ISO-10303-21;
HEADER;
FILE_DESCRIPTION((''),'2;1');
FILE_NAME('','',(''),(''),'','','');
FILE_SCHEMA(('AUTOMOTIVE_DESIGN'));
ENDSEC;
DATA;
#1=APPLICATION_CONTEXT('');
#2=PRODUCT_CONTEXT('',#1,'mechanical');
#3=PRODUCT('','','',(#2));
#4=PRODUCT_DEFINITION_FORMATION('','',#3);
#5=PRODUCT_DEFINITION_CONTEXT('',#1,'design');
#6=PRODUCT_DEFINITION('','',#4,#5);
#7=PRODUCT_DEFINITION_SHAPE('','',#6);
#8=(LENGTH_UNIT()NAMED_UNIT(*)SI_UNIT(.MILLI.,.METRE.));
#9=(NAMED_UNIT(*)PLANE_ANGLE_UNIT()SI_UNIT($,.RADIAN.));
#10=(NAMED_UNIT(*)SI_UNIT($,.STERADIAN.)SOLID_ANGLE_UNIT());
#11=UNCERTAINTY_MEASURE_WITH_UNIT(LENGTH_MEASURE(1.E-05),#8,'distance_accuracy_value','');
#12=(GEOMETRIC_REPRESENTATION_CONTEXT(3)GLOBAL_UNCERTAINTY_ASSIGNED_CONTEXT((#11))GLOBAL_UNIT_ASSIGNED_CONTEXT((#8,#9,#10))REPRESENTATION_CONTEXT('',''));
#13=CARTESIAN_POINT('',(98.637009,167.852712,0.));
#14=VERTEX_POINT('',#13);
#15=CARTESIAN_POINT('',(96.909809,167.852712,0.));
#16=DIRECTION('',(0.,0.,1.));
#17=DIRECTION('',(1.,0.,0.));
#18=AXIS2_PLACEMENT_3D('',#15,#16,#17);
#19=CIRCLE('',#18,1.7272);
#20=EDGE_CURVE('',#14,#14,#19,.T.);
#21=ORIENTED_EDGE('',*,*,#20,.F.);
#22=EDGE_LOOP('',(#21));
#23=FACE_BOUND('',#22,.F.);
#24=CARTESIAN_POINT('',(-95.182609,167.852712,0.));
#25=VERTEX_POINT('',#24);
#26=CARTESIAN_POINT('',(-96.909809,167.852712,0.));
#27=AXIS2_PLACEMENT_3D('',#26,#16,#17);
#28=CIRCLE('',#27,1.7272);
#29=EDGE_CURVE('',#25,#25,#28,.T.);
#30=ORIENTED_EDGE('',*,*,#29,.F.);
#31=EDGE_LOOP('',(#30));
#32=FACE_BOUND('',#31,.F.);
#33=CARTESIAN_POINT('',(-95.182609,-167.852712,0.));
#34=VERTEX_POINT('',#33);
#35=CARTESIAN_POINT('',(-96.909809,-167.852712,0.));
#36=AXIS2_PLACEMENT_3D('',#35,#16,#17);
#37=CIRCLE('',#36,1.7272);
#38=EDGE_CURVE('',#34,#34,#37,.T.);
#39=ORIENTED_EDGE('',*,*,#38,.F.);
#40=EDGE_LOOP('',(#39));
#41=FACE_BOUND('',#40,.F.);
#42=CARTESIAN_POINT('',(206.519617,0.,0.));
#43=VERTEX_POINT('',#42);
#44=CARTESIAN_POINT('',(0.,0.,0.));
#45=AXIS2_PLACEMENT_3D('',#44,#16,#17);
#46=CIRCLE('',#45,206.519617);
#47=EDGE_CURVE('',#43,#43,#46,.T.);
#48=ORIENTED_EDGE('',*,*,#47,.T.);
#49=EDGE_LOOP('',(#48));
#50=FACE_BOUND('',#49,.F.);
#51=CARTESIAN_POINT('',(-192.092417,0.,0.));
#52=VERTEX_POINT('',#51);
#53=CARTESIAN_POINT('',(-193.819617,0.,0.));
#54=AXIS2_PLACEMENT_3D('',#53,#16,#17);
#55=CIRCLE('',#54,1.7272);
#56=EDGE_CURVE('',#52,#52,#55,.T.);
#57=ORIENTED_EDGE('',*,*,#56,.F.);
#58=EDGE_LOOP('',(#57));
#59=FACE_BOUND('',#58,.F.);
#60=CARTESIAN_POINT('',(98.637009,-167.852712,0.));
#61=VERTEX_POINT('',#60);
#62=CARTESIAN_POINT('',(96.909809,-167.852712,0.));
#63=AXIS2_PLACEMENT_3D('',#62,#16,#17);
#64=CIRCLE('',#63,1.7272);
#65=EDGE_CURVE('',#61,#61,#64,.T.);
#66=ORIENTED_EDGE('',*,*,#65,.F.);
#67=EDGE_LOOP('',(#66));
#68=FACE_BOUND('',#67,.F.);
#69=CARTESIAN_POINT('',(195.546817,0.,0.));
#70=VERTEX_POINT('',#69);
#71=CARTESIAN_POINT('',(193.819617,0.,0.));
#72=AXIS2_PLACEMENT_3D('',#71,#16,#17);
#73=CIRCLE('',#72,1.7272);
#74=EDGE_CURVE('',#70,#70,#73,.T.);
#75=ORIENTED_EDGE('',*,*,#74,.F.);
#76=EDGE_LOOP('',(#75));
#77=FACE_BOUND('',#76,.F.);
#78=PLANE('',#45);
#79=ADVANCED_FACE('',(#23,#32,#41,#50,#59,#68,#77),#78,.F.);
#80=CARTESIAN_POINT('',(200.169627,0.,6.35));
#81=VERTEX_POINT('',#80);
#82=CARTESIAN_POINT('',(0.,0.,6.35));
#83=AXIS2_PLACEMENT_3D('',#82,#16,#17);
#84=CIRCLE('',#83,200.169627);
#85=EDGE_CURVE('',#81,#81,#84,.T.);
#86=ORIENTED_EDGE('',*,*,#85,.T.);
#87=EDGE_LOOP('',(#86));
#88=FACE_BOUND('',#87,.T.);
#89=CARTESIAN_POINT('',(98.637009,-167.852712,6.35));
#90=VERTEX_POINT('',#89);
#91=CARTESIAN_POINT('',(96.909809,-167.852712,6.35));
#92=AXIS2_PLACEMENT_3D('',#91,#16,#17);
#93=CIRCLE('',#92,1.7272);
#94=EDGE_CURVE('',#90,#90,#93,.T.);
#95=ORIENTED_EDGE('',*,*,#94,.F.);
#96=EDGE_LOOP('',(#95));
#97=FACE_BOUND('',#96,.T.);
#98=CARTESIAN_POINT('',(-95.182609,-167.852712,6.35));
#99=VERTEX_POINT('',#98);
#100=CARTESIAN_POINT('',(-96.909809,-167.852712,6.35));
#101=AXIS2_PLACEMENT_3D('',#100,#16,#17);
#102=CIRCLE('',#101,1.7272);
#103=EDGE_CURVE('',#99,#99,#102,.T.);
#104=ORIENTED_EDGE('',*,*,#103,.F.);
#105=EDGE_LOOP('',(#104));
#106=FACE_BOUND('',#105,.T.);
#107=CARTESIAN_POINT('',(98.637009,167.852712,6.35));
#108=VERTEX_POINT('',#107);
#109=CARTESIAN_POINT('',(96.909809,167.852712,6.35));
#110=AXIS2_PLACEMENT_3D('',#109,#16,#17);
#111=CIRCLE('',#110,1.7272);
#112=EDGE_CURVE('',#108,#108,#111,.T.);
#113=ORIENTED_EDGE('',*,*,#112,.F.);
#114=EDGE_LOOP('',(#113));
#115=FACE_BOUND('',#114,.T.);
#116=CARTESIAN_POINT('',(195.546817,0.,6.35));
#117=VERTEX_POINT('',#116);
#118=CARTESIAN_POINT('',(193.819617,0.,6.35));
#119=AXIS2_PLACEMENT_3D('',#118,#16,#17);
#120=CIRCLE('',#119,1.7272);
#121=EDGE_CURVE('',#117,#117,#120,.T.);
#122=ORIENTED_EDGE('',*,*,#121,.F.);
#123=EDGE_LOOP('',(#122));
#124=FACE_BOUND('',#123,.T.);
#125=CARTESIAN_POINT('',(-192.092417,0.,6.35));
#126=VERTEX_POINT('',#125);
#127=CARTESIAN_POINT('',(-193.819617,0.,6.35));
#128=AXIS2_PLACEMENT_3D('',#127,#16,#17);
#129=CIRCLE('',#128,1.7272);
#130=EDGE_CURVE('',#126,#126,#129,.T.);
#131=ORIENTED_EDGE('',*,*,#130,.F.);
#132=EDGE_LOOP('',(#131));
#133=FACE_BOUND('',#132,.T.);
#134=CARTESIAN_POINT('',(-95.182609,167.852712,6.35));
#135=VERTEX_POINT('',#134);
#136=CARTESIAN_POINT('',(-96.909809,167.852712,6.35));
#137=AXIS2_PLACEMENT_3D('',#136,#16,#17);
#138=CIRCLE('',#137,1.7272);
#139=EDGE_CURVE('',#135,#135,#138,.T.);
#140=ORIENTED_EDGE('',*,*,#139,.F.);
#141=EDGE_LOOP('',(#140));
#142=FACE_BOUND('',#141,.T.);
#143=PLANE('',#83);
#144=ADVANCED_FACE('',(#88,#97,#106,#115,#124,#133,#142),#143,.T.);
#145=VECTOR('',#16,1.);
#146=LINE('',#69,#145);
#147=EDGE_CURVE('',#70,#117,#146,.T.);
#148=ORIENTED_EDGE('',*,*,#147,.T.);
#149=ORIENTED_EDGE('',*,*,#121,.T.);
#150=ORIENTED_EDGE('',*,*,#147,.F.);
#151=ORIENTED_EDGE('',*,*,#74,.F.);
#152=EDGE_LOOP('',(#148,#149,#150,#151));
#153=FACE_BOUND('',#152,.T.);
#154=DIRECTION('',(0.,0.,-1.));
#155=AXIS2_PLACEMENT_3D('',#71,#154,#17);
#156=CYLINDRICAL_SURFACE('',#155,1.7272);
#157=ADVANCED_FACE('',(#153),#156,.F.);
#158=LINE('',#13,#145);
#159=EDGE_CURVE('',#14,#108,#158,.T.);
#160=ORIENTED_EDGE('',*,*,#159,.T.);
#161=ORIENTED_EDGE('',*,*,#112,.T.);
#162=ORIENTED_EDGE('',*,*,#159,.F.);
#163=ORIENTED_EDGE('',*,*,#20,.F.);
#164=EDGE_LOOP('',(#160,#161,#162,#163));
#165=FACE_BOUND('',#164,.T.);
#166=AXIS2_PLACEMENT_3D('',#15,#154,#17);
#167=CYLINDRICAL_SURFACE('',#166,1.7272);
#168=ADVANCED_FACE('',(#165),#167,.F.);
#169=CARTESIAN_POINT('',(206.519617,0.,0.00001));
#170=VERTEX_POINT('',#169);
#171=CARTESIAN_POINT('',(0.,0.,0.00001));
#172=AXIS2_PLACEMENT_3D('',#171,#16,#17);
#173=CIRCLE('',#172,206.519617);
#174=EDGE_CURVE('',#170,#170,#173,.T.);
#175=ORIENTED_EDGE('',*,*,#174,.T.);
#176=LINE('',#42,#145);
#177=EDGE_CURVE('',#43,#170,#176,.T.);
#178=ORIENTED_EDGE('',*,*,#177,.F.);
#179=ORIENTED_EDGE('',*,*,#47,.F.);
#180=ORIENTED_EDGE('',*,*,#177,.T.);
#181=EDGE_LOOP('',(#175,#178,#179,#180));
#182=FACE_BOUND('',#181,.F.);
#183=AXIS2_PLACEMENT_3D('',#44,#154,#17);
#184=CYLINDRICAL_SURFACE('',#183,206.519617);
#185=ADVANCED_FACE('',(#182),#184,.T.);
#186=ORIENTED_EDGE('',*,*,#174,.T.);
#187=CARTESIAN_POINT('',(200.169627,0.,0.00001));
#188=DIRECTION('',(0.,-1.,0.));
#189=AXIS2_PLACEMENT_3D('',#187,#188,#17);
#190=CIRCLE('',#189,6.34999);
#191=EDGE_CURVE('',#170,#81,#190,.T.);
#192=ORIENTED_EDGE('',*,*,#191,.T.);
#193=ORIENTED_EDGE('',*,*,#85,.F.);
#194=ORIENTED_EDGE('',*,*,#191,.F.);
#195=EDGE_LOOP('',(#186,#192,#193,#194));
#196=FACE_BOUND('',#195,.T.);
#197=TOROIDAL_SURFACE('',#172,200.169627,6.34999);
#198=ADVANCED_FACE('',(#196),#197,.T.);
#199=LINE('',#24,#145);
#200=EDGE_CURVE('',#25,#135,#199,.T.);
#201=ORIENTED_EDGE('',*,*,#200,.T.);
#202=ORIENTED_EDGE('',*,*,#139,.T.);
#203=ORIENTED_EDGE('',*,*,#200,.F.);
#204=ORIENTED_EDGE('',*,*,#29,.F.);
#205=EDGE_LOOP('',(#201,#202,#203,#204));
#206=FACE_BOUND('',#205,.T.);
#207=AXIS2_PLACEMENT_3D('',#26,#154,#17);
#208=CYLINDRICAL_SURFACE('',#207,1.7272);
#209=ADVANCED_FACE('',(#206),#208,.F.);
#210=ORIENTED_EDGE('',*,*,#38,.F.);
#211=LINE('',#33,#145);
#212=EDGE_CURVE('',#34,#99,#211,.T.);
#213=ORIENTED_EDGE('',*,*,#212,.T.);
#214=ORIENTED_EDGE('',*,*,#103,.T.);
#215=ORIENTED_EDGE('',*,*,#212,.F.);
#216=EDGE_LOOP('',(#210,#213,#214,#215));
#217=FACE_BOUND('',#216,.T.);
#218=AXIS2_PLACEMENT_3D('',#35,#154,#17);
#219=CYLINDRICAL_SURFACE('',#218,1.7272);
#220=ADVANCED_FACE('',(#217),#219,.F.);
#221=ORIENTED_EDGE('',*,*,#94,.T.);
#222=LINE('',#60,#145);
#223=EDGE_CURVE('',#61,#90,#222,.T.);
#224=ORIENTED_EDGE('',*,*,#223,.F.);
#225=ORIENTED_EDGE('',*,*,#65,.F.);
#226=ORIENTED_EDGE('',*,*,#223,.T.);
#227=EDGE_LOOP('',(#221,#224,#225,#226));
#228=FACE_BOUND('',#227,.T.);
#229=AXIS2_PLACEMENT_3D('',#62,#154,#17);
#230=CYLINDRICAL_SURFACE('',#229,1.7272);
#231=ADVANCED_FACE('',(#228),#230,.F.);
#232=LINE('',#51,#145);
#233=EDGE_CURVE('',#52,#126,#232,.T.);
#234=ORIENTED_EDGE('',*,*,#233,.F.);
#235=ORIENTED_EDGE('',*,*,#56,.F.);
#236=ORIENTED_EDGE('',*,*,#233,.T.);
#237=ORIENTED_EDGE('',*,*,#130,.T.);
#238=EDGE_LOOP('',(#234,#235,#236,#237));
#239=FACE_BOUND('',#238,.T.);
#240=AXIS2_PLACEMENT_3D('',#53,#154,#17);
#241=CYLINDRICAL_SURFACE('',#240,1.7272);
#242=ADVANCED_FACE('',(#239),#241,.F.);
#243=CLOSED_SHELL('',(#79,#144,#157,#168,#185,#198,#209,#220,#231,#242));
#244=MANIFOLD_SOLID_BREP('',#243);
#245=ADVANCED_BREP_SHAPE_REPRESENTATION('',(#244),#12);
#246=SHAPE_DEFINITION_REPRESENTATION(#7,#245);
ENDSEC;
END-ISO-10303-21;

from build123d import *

# Parameters (mm, degrees)
F0_R     = 206.5196172612
F0_R_2   = 1.7272
F1_DEPTH = 6.35
F2_R     = 6.34999


# Not quite as in the source:
# - a fillet or chamfer is up to 0.001 mm smaller than in the source, because OpenCascade refuses the exact size


with BuildPart() as f1:
    # F0 (on Top) → F1 (new body)
    with BuildSketch(Plane.XY):
        Circle(F0_R)
        with Locations((-96.9098086306, -167.8527123)):
            Circle(F0_R_2, mode=Mode.SUBTRACT)
        with Locations((96.9098086306, -167.8527123)):
            Circle(F0_R_2, mode=Mode.SUBTRACT)
        with Locations((-193.8196172612, 0)):
            Circle(F0_R_2, mode=Mode.SUBTRACT)
        with Locations((-96.9098086306, 167.8527123)):
            Circle(F0_R_2, mode=Mode.SUBTRACT)
        with Locations((193.8196172612, 0)):
            Circle(F0_R_2, mode=Mode.SUBTRACT)
        with Locations((96.9098086306, 167.8527123)):
            Circle(F0_R_2, mode=Mode.SUBTRACT)
    extrude(amount=F1_DEPTH)

    # F2 (radius 6.35 in the source; OpenCascade refuses exactly that, so slightly less here)
    f2_edges = [f1.edges().sort_by_distance(p)[0] for p in [
        (-206.519617, 0, 6.35),
    ]]
    fillet(f2_edges, radius=F2_R)


solid = f1.part
